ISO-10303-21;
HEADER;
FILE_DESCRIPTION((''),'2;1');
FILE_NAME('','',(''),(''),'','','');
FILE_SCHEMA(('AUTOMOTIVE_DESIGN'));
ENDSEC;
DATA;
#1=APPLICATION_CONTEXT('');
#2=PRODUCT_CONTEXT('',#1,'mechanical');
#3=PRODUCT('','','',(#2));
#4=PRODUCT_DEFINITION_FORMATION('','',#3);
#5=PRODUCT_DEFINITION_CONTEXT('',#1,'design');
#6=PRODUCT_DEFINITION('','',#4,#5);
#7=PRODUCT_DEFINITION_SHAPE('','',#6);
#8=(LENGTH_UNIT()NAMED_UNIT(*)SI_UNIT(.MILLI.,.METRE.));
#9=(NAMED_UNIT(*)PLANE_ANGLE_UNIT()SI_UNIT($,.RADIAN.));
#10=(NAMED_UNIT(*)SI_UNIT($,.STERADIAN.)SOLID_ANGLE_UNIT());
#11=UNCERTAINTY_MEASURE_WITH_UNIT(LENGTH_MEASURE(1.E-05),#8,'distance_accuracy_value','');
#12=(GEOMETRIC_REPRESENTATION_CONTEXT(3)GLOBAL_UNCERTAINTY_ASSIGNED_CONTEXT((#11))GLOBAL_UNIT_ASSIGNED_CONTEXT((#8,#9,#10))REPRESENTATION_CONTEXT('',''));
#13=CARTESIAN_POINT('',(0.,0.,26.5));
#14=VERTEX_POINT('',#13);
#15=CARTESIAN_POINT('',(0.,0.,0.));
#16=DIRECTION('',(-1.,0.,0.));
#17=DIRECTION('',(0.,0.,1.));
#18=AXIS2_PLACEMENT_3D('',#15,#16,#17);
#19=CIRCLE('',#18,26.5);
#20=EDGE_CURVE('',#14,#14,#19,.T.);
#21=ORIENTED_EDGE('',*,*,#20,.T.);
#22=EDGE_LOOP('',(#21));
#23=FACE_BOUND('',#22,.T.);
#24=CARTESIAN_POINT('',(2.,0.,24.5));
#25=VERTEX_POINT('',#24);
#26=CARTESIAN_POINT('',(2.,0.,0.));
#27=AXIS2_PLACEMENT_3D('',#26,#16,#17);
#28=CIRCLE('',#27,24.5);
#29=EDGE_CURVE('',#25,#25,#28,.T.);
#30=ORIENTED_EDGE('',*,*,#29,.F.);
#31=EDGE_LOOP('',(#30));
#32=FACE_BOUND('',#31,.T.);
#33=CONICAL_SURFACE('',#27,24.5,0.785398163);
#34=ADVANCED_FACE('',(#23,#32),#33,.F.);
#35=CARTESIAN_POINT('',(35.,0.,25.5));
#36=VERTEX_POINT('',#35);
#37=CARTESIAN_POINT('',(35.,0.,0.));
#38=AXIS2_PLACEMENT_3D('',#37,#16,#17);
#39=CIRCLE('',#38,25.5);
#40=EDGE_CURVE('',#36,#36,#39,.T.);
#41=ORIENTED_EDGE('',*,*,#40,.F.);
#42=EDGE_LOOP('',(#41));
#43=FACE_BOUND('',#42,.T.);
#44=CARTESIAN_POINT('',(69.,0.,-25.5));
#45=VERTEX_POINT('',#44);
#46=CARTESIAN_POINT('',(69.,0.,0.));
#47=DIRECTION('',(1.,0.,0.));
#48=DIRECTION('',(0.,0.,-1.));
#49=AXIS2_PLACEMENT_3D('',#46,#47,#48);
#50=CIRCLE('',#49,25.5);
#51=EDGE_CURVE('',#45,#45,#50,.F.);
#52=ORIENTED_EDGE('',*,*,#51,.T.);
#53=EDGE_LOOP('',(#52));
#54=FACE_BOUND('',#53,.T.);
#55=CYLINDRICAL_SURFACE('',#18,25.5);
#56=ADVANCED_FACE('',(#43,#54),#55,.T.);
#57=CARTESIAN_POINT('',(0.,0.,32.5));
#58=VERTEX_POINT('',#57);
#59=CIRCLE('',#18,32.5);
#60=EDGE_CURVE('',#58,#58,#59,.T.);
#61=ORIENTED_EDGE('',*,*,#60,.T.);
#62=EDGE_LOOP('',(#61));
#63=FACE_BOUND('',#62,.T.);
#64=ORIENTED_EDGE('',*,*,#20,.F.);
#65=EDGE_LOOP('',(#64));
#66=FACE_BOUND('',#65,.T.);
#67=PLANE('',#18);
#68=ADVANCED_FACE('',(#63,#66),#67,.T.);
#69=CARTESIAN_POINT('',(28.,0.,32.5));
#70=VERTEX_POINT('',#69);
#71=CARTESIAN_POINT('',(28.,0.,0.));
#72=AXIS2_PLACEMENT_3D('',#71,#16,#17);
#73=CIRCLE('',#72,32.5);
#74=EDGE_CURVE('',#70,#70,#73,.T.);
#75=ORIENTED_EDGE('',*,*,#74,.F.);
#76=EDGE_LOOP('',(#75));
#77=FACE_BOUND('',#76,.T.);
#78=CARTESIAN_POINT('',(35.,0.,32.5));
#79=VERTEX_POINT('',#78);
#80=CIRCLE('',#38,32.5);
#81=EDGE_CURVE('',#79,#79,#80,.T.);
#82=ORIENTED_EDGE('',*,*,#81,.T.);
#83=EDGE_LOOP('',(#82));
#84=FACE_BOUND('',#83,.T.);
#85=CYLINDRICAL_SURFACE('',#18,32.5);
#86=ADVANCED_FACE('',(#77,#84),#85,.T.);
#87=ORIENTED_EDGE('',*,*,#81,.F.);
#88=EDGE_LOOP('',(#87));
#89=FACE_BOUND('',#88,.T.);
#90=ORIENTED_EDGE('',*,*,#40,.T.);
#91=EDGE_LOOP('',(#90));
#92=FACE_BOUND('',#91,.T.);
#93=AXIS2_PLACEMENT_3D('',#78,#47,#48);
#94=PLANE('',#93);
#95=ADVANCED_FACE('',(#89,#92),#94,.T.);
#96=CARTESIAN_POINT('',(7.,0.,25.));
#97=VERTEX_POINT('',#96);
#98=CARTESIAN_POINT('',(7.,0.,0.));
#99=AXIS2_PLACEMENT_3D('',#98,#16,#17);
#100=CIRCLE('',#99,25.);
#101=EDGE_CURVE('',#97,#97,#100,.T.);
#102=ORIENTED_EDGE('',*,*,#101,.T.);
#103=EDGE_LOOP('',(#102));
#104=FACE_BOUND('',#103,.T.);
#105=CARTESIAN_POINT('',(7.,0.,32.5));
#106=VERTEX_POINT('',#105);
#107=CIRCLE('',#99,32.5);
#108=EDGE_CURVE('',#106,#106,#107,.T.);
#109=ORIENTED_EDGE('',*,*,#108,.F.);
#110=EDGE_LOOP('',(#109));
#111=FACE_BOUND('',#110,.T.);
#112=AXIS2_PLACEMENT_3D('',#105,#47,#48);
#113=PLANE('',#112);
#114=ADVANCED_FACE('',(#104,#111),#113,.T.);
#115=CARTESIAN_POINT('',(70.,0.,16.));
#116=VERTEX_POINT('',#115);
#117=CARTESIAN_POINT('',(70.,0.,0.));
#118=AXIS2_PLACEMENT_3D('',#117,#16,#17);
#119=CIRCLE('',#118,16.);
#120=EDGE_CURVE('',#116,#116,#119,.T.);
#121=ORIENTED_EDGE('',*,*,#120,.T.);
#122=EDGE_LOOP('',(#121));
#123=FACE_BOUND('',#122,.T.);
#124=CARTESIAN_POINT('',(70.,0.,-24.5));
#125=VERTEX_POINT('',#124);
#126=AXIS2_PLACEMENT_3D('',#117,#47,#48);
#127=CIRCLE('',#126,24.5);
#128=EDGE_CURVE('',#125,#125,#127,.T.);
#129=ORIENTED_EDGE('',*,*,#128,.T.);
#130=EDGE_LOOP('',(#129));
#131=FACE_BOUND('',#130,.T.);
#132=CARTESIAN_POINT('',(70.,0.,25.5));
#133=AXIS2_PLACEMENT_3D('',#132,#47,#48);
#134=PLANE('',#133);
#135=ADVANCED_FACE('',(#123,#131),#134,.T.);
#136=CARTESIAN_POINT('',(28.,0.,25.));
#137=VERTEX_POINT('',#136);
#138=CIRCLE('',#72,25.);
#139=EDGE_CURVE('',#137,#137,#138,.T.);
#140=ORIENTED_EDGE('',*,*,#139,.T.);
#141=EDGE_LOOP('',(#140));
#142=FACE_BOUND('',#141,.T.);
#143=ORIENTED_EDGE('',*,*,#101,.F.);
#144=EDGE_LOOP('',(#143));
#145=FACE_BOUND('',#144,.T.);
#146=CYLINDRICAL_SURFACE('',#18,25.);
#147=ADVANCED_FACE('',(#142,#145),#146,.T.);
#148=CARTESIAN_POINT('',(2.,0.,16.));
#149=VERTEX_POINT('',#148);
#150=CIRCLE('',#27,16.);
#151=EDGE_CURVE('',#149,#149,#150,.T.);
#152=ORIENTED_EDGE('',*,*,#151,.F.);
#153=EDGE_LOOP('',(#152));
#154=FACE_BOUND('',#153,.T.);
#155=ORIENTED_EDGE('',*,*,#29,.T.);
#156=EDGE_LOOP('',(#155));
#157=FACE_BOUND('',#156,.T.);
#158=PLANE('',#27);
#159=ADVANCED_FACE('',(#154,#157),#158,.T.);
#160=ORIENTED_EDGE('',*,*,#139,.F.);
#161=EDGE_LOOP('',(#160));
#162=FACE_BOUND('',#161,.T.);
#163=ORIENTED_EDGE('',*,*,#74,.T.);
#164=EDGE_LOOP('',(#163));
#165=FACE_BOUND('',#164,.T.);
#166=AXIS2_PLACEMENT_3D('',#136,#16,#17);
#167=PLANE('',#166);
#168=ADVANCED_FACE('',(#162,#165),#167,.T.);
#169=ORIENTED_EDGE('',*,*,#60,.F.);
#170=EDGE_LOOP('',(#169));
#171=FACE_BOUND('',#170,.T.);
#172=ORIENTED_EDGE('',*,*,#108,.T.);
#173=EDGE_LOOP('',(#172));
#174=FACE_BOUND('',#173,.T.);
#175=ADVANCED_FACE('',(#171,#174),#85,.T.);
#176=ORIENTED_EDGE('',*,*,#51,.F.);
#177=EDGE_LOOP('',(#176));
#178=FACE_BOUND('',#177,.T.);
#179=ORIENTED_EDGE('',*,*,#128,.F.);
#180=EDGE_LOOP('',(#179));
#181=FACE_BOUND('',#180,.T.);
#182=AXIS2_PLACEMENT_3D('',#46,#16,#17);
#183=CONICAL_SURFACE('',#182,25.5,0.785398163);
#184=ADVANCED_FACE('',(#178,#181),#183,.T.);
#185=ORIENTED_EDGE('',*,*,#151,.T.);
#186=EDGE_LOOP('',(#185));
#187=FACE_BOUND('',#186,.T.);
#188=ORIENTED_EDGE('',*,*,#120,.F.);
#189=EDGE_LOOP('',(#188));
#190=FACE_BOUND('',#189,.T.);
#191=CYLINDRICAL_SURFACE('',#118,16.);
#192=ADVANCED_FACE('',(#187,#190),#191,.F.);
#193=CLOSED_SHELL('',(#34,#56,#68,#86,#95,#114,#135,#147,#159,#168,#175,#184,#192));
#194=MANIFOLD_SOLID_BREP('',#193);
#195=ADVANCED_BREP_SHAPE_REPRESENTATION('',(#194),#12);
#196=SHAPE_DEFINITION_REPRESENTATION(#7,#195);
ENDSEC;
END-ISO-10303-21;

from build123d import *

# Parameters (mm, degrees)
SKETCH2_R          = 26.5
CUT_EXTRUDE1_DEPTH = 2
CHAMFER1_SIZE      = 2
SKETCH3_R          = 16
CUT_EXTRUDE2_DEPTH = 83.076184122
CHAMFER3_SIZE      = 1


with BuildPart() as part:
    # Sketch1 → Revolve1 (revolve)
    with BuildSketch(Plane(origin=(0, 0, 0), x_dir=(1, 0, 0), z_dir=(0, 1, 0))):
        Polygon((0, 0), (70, 0), (70, -25.5), (35, -25.5), (35, -32.5), (28, -32.5), (28, -25), (7, -25), (7, -32.5), (0, -32.5), align=None)
    revolve(axis=Axis((0, 0, 0), (1, 0, 0)))

    # Sketch2 → Cut-Extrude1 (cut)
    with BuildSketch(Plane.ZY):
        Circle(SKETCH2_R)
    extrude(amount=-CUT_EXTRUDE1_DEPTH, mode=Mode.SUBTRACT)

    # Chamfer1
    chamfer1_edges = [part.edges().sort_by_distance(p)[0] for p in [
        (2, 0, -26.5),
    ]]
    chamfer(chamfer1_edges, length=CHAMFER1_SIZE - 0.0001)  # a hair under: the kernel refuses the full size

    # Sketch3 → Cut-Extrude2 (cut, through all)
    with BuildSketch(Plane.ZY.offset(-2)):
        Circle(SKETCH3_R)
    extrude(amount=-CUT_EXTRUDE2_DEPTH, mode=Mode.SUBTRACT)

    # Chamfer3
    chamfer3_edges = [part.edges().sort_by_distance(p)[0] for p in [
        (70, 0, -25.5),
    ]]
    chamfer(chamfer3_edges, length=CHAMFER3_SIZE)


solid = part.part
